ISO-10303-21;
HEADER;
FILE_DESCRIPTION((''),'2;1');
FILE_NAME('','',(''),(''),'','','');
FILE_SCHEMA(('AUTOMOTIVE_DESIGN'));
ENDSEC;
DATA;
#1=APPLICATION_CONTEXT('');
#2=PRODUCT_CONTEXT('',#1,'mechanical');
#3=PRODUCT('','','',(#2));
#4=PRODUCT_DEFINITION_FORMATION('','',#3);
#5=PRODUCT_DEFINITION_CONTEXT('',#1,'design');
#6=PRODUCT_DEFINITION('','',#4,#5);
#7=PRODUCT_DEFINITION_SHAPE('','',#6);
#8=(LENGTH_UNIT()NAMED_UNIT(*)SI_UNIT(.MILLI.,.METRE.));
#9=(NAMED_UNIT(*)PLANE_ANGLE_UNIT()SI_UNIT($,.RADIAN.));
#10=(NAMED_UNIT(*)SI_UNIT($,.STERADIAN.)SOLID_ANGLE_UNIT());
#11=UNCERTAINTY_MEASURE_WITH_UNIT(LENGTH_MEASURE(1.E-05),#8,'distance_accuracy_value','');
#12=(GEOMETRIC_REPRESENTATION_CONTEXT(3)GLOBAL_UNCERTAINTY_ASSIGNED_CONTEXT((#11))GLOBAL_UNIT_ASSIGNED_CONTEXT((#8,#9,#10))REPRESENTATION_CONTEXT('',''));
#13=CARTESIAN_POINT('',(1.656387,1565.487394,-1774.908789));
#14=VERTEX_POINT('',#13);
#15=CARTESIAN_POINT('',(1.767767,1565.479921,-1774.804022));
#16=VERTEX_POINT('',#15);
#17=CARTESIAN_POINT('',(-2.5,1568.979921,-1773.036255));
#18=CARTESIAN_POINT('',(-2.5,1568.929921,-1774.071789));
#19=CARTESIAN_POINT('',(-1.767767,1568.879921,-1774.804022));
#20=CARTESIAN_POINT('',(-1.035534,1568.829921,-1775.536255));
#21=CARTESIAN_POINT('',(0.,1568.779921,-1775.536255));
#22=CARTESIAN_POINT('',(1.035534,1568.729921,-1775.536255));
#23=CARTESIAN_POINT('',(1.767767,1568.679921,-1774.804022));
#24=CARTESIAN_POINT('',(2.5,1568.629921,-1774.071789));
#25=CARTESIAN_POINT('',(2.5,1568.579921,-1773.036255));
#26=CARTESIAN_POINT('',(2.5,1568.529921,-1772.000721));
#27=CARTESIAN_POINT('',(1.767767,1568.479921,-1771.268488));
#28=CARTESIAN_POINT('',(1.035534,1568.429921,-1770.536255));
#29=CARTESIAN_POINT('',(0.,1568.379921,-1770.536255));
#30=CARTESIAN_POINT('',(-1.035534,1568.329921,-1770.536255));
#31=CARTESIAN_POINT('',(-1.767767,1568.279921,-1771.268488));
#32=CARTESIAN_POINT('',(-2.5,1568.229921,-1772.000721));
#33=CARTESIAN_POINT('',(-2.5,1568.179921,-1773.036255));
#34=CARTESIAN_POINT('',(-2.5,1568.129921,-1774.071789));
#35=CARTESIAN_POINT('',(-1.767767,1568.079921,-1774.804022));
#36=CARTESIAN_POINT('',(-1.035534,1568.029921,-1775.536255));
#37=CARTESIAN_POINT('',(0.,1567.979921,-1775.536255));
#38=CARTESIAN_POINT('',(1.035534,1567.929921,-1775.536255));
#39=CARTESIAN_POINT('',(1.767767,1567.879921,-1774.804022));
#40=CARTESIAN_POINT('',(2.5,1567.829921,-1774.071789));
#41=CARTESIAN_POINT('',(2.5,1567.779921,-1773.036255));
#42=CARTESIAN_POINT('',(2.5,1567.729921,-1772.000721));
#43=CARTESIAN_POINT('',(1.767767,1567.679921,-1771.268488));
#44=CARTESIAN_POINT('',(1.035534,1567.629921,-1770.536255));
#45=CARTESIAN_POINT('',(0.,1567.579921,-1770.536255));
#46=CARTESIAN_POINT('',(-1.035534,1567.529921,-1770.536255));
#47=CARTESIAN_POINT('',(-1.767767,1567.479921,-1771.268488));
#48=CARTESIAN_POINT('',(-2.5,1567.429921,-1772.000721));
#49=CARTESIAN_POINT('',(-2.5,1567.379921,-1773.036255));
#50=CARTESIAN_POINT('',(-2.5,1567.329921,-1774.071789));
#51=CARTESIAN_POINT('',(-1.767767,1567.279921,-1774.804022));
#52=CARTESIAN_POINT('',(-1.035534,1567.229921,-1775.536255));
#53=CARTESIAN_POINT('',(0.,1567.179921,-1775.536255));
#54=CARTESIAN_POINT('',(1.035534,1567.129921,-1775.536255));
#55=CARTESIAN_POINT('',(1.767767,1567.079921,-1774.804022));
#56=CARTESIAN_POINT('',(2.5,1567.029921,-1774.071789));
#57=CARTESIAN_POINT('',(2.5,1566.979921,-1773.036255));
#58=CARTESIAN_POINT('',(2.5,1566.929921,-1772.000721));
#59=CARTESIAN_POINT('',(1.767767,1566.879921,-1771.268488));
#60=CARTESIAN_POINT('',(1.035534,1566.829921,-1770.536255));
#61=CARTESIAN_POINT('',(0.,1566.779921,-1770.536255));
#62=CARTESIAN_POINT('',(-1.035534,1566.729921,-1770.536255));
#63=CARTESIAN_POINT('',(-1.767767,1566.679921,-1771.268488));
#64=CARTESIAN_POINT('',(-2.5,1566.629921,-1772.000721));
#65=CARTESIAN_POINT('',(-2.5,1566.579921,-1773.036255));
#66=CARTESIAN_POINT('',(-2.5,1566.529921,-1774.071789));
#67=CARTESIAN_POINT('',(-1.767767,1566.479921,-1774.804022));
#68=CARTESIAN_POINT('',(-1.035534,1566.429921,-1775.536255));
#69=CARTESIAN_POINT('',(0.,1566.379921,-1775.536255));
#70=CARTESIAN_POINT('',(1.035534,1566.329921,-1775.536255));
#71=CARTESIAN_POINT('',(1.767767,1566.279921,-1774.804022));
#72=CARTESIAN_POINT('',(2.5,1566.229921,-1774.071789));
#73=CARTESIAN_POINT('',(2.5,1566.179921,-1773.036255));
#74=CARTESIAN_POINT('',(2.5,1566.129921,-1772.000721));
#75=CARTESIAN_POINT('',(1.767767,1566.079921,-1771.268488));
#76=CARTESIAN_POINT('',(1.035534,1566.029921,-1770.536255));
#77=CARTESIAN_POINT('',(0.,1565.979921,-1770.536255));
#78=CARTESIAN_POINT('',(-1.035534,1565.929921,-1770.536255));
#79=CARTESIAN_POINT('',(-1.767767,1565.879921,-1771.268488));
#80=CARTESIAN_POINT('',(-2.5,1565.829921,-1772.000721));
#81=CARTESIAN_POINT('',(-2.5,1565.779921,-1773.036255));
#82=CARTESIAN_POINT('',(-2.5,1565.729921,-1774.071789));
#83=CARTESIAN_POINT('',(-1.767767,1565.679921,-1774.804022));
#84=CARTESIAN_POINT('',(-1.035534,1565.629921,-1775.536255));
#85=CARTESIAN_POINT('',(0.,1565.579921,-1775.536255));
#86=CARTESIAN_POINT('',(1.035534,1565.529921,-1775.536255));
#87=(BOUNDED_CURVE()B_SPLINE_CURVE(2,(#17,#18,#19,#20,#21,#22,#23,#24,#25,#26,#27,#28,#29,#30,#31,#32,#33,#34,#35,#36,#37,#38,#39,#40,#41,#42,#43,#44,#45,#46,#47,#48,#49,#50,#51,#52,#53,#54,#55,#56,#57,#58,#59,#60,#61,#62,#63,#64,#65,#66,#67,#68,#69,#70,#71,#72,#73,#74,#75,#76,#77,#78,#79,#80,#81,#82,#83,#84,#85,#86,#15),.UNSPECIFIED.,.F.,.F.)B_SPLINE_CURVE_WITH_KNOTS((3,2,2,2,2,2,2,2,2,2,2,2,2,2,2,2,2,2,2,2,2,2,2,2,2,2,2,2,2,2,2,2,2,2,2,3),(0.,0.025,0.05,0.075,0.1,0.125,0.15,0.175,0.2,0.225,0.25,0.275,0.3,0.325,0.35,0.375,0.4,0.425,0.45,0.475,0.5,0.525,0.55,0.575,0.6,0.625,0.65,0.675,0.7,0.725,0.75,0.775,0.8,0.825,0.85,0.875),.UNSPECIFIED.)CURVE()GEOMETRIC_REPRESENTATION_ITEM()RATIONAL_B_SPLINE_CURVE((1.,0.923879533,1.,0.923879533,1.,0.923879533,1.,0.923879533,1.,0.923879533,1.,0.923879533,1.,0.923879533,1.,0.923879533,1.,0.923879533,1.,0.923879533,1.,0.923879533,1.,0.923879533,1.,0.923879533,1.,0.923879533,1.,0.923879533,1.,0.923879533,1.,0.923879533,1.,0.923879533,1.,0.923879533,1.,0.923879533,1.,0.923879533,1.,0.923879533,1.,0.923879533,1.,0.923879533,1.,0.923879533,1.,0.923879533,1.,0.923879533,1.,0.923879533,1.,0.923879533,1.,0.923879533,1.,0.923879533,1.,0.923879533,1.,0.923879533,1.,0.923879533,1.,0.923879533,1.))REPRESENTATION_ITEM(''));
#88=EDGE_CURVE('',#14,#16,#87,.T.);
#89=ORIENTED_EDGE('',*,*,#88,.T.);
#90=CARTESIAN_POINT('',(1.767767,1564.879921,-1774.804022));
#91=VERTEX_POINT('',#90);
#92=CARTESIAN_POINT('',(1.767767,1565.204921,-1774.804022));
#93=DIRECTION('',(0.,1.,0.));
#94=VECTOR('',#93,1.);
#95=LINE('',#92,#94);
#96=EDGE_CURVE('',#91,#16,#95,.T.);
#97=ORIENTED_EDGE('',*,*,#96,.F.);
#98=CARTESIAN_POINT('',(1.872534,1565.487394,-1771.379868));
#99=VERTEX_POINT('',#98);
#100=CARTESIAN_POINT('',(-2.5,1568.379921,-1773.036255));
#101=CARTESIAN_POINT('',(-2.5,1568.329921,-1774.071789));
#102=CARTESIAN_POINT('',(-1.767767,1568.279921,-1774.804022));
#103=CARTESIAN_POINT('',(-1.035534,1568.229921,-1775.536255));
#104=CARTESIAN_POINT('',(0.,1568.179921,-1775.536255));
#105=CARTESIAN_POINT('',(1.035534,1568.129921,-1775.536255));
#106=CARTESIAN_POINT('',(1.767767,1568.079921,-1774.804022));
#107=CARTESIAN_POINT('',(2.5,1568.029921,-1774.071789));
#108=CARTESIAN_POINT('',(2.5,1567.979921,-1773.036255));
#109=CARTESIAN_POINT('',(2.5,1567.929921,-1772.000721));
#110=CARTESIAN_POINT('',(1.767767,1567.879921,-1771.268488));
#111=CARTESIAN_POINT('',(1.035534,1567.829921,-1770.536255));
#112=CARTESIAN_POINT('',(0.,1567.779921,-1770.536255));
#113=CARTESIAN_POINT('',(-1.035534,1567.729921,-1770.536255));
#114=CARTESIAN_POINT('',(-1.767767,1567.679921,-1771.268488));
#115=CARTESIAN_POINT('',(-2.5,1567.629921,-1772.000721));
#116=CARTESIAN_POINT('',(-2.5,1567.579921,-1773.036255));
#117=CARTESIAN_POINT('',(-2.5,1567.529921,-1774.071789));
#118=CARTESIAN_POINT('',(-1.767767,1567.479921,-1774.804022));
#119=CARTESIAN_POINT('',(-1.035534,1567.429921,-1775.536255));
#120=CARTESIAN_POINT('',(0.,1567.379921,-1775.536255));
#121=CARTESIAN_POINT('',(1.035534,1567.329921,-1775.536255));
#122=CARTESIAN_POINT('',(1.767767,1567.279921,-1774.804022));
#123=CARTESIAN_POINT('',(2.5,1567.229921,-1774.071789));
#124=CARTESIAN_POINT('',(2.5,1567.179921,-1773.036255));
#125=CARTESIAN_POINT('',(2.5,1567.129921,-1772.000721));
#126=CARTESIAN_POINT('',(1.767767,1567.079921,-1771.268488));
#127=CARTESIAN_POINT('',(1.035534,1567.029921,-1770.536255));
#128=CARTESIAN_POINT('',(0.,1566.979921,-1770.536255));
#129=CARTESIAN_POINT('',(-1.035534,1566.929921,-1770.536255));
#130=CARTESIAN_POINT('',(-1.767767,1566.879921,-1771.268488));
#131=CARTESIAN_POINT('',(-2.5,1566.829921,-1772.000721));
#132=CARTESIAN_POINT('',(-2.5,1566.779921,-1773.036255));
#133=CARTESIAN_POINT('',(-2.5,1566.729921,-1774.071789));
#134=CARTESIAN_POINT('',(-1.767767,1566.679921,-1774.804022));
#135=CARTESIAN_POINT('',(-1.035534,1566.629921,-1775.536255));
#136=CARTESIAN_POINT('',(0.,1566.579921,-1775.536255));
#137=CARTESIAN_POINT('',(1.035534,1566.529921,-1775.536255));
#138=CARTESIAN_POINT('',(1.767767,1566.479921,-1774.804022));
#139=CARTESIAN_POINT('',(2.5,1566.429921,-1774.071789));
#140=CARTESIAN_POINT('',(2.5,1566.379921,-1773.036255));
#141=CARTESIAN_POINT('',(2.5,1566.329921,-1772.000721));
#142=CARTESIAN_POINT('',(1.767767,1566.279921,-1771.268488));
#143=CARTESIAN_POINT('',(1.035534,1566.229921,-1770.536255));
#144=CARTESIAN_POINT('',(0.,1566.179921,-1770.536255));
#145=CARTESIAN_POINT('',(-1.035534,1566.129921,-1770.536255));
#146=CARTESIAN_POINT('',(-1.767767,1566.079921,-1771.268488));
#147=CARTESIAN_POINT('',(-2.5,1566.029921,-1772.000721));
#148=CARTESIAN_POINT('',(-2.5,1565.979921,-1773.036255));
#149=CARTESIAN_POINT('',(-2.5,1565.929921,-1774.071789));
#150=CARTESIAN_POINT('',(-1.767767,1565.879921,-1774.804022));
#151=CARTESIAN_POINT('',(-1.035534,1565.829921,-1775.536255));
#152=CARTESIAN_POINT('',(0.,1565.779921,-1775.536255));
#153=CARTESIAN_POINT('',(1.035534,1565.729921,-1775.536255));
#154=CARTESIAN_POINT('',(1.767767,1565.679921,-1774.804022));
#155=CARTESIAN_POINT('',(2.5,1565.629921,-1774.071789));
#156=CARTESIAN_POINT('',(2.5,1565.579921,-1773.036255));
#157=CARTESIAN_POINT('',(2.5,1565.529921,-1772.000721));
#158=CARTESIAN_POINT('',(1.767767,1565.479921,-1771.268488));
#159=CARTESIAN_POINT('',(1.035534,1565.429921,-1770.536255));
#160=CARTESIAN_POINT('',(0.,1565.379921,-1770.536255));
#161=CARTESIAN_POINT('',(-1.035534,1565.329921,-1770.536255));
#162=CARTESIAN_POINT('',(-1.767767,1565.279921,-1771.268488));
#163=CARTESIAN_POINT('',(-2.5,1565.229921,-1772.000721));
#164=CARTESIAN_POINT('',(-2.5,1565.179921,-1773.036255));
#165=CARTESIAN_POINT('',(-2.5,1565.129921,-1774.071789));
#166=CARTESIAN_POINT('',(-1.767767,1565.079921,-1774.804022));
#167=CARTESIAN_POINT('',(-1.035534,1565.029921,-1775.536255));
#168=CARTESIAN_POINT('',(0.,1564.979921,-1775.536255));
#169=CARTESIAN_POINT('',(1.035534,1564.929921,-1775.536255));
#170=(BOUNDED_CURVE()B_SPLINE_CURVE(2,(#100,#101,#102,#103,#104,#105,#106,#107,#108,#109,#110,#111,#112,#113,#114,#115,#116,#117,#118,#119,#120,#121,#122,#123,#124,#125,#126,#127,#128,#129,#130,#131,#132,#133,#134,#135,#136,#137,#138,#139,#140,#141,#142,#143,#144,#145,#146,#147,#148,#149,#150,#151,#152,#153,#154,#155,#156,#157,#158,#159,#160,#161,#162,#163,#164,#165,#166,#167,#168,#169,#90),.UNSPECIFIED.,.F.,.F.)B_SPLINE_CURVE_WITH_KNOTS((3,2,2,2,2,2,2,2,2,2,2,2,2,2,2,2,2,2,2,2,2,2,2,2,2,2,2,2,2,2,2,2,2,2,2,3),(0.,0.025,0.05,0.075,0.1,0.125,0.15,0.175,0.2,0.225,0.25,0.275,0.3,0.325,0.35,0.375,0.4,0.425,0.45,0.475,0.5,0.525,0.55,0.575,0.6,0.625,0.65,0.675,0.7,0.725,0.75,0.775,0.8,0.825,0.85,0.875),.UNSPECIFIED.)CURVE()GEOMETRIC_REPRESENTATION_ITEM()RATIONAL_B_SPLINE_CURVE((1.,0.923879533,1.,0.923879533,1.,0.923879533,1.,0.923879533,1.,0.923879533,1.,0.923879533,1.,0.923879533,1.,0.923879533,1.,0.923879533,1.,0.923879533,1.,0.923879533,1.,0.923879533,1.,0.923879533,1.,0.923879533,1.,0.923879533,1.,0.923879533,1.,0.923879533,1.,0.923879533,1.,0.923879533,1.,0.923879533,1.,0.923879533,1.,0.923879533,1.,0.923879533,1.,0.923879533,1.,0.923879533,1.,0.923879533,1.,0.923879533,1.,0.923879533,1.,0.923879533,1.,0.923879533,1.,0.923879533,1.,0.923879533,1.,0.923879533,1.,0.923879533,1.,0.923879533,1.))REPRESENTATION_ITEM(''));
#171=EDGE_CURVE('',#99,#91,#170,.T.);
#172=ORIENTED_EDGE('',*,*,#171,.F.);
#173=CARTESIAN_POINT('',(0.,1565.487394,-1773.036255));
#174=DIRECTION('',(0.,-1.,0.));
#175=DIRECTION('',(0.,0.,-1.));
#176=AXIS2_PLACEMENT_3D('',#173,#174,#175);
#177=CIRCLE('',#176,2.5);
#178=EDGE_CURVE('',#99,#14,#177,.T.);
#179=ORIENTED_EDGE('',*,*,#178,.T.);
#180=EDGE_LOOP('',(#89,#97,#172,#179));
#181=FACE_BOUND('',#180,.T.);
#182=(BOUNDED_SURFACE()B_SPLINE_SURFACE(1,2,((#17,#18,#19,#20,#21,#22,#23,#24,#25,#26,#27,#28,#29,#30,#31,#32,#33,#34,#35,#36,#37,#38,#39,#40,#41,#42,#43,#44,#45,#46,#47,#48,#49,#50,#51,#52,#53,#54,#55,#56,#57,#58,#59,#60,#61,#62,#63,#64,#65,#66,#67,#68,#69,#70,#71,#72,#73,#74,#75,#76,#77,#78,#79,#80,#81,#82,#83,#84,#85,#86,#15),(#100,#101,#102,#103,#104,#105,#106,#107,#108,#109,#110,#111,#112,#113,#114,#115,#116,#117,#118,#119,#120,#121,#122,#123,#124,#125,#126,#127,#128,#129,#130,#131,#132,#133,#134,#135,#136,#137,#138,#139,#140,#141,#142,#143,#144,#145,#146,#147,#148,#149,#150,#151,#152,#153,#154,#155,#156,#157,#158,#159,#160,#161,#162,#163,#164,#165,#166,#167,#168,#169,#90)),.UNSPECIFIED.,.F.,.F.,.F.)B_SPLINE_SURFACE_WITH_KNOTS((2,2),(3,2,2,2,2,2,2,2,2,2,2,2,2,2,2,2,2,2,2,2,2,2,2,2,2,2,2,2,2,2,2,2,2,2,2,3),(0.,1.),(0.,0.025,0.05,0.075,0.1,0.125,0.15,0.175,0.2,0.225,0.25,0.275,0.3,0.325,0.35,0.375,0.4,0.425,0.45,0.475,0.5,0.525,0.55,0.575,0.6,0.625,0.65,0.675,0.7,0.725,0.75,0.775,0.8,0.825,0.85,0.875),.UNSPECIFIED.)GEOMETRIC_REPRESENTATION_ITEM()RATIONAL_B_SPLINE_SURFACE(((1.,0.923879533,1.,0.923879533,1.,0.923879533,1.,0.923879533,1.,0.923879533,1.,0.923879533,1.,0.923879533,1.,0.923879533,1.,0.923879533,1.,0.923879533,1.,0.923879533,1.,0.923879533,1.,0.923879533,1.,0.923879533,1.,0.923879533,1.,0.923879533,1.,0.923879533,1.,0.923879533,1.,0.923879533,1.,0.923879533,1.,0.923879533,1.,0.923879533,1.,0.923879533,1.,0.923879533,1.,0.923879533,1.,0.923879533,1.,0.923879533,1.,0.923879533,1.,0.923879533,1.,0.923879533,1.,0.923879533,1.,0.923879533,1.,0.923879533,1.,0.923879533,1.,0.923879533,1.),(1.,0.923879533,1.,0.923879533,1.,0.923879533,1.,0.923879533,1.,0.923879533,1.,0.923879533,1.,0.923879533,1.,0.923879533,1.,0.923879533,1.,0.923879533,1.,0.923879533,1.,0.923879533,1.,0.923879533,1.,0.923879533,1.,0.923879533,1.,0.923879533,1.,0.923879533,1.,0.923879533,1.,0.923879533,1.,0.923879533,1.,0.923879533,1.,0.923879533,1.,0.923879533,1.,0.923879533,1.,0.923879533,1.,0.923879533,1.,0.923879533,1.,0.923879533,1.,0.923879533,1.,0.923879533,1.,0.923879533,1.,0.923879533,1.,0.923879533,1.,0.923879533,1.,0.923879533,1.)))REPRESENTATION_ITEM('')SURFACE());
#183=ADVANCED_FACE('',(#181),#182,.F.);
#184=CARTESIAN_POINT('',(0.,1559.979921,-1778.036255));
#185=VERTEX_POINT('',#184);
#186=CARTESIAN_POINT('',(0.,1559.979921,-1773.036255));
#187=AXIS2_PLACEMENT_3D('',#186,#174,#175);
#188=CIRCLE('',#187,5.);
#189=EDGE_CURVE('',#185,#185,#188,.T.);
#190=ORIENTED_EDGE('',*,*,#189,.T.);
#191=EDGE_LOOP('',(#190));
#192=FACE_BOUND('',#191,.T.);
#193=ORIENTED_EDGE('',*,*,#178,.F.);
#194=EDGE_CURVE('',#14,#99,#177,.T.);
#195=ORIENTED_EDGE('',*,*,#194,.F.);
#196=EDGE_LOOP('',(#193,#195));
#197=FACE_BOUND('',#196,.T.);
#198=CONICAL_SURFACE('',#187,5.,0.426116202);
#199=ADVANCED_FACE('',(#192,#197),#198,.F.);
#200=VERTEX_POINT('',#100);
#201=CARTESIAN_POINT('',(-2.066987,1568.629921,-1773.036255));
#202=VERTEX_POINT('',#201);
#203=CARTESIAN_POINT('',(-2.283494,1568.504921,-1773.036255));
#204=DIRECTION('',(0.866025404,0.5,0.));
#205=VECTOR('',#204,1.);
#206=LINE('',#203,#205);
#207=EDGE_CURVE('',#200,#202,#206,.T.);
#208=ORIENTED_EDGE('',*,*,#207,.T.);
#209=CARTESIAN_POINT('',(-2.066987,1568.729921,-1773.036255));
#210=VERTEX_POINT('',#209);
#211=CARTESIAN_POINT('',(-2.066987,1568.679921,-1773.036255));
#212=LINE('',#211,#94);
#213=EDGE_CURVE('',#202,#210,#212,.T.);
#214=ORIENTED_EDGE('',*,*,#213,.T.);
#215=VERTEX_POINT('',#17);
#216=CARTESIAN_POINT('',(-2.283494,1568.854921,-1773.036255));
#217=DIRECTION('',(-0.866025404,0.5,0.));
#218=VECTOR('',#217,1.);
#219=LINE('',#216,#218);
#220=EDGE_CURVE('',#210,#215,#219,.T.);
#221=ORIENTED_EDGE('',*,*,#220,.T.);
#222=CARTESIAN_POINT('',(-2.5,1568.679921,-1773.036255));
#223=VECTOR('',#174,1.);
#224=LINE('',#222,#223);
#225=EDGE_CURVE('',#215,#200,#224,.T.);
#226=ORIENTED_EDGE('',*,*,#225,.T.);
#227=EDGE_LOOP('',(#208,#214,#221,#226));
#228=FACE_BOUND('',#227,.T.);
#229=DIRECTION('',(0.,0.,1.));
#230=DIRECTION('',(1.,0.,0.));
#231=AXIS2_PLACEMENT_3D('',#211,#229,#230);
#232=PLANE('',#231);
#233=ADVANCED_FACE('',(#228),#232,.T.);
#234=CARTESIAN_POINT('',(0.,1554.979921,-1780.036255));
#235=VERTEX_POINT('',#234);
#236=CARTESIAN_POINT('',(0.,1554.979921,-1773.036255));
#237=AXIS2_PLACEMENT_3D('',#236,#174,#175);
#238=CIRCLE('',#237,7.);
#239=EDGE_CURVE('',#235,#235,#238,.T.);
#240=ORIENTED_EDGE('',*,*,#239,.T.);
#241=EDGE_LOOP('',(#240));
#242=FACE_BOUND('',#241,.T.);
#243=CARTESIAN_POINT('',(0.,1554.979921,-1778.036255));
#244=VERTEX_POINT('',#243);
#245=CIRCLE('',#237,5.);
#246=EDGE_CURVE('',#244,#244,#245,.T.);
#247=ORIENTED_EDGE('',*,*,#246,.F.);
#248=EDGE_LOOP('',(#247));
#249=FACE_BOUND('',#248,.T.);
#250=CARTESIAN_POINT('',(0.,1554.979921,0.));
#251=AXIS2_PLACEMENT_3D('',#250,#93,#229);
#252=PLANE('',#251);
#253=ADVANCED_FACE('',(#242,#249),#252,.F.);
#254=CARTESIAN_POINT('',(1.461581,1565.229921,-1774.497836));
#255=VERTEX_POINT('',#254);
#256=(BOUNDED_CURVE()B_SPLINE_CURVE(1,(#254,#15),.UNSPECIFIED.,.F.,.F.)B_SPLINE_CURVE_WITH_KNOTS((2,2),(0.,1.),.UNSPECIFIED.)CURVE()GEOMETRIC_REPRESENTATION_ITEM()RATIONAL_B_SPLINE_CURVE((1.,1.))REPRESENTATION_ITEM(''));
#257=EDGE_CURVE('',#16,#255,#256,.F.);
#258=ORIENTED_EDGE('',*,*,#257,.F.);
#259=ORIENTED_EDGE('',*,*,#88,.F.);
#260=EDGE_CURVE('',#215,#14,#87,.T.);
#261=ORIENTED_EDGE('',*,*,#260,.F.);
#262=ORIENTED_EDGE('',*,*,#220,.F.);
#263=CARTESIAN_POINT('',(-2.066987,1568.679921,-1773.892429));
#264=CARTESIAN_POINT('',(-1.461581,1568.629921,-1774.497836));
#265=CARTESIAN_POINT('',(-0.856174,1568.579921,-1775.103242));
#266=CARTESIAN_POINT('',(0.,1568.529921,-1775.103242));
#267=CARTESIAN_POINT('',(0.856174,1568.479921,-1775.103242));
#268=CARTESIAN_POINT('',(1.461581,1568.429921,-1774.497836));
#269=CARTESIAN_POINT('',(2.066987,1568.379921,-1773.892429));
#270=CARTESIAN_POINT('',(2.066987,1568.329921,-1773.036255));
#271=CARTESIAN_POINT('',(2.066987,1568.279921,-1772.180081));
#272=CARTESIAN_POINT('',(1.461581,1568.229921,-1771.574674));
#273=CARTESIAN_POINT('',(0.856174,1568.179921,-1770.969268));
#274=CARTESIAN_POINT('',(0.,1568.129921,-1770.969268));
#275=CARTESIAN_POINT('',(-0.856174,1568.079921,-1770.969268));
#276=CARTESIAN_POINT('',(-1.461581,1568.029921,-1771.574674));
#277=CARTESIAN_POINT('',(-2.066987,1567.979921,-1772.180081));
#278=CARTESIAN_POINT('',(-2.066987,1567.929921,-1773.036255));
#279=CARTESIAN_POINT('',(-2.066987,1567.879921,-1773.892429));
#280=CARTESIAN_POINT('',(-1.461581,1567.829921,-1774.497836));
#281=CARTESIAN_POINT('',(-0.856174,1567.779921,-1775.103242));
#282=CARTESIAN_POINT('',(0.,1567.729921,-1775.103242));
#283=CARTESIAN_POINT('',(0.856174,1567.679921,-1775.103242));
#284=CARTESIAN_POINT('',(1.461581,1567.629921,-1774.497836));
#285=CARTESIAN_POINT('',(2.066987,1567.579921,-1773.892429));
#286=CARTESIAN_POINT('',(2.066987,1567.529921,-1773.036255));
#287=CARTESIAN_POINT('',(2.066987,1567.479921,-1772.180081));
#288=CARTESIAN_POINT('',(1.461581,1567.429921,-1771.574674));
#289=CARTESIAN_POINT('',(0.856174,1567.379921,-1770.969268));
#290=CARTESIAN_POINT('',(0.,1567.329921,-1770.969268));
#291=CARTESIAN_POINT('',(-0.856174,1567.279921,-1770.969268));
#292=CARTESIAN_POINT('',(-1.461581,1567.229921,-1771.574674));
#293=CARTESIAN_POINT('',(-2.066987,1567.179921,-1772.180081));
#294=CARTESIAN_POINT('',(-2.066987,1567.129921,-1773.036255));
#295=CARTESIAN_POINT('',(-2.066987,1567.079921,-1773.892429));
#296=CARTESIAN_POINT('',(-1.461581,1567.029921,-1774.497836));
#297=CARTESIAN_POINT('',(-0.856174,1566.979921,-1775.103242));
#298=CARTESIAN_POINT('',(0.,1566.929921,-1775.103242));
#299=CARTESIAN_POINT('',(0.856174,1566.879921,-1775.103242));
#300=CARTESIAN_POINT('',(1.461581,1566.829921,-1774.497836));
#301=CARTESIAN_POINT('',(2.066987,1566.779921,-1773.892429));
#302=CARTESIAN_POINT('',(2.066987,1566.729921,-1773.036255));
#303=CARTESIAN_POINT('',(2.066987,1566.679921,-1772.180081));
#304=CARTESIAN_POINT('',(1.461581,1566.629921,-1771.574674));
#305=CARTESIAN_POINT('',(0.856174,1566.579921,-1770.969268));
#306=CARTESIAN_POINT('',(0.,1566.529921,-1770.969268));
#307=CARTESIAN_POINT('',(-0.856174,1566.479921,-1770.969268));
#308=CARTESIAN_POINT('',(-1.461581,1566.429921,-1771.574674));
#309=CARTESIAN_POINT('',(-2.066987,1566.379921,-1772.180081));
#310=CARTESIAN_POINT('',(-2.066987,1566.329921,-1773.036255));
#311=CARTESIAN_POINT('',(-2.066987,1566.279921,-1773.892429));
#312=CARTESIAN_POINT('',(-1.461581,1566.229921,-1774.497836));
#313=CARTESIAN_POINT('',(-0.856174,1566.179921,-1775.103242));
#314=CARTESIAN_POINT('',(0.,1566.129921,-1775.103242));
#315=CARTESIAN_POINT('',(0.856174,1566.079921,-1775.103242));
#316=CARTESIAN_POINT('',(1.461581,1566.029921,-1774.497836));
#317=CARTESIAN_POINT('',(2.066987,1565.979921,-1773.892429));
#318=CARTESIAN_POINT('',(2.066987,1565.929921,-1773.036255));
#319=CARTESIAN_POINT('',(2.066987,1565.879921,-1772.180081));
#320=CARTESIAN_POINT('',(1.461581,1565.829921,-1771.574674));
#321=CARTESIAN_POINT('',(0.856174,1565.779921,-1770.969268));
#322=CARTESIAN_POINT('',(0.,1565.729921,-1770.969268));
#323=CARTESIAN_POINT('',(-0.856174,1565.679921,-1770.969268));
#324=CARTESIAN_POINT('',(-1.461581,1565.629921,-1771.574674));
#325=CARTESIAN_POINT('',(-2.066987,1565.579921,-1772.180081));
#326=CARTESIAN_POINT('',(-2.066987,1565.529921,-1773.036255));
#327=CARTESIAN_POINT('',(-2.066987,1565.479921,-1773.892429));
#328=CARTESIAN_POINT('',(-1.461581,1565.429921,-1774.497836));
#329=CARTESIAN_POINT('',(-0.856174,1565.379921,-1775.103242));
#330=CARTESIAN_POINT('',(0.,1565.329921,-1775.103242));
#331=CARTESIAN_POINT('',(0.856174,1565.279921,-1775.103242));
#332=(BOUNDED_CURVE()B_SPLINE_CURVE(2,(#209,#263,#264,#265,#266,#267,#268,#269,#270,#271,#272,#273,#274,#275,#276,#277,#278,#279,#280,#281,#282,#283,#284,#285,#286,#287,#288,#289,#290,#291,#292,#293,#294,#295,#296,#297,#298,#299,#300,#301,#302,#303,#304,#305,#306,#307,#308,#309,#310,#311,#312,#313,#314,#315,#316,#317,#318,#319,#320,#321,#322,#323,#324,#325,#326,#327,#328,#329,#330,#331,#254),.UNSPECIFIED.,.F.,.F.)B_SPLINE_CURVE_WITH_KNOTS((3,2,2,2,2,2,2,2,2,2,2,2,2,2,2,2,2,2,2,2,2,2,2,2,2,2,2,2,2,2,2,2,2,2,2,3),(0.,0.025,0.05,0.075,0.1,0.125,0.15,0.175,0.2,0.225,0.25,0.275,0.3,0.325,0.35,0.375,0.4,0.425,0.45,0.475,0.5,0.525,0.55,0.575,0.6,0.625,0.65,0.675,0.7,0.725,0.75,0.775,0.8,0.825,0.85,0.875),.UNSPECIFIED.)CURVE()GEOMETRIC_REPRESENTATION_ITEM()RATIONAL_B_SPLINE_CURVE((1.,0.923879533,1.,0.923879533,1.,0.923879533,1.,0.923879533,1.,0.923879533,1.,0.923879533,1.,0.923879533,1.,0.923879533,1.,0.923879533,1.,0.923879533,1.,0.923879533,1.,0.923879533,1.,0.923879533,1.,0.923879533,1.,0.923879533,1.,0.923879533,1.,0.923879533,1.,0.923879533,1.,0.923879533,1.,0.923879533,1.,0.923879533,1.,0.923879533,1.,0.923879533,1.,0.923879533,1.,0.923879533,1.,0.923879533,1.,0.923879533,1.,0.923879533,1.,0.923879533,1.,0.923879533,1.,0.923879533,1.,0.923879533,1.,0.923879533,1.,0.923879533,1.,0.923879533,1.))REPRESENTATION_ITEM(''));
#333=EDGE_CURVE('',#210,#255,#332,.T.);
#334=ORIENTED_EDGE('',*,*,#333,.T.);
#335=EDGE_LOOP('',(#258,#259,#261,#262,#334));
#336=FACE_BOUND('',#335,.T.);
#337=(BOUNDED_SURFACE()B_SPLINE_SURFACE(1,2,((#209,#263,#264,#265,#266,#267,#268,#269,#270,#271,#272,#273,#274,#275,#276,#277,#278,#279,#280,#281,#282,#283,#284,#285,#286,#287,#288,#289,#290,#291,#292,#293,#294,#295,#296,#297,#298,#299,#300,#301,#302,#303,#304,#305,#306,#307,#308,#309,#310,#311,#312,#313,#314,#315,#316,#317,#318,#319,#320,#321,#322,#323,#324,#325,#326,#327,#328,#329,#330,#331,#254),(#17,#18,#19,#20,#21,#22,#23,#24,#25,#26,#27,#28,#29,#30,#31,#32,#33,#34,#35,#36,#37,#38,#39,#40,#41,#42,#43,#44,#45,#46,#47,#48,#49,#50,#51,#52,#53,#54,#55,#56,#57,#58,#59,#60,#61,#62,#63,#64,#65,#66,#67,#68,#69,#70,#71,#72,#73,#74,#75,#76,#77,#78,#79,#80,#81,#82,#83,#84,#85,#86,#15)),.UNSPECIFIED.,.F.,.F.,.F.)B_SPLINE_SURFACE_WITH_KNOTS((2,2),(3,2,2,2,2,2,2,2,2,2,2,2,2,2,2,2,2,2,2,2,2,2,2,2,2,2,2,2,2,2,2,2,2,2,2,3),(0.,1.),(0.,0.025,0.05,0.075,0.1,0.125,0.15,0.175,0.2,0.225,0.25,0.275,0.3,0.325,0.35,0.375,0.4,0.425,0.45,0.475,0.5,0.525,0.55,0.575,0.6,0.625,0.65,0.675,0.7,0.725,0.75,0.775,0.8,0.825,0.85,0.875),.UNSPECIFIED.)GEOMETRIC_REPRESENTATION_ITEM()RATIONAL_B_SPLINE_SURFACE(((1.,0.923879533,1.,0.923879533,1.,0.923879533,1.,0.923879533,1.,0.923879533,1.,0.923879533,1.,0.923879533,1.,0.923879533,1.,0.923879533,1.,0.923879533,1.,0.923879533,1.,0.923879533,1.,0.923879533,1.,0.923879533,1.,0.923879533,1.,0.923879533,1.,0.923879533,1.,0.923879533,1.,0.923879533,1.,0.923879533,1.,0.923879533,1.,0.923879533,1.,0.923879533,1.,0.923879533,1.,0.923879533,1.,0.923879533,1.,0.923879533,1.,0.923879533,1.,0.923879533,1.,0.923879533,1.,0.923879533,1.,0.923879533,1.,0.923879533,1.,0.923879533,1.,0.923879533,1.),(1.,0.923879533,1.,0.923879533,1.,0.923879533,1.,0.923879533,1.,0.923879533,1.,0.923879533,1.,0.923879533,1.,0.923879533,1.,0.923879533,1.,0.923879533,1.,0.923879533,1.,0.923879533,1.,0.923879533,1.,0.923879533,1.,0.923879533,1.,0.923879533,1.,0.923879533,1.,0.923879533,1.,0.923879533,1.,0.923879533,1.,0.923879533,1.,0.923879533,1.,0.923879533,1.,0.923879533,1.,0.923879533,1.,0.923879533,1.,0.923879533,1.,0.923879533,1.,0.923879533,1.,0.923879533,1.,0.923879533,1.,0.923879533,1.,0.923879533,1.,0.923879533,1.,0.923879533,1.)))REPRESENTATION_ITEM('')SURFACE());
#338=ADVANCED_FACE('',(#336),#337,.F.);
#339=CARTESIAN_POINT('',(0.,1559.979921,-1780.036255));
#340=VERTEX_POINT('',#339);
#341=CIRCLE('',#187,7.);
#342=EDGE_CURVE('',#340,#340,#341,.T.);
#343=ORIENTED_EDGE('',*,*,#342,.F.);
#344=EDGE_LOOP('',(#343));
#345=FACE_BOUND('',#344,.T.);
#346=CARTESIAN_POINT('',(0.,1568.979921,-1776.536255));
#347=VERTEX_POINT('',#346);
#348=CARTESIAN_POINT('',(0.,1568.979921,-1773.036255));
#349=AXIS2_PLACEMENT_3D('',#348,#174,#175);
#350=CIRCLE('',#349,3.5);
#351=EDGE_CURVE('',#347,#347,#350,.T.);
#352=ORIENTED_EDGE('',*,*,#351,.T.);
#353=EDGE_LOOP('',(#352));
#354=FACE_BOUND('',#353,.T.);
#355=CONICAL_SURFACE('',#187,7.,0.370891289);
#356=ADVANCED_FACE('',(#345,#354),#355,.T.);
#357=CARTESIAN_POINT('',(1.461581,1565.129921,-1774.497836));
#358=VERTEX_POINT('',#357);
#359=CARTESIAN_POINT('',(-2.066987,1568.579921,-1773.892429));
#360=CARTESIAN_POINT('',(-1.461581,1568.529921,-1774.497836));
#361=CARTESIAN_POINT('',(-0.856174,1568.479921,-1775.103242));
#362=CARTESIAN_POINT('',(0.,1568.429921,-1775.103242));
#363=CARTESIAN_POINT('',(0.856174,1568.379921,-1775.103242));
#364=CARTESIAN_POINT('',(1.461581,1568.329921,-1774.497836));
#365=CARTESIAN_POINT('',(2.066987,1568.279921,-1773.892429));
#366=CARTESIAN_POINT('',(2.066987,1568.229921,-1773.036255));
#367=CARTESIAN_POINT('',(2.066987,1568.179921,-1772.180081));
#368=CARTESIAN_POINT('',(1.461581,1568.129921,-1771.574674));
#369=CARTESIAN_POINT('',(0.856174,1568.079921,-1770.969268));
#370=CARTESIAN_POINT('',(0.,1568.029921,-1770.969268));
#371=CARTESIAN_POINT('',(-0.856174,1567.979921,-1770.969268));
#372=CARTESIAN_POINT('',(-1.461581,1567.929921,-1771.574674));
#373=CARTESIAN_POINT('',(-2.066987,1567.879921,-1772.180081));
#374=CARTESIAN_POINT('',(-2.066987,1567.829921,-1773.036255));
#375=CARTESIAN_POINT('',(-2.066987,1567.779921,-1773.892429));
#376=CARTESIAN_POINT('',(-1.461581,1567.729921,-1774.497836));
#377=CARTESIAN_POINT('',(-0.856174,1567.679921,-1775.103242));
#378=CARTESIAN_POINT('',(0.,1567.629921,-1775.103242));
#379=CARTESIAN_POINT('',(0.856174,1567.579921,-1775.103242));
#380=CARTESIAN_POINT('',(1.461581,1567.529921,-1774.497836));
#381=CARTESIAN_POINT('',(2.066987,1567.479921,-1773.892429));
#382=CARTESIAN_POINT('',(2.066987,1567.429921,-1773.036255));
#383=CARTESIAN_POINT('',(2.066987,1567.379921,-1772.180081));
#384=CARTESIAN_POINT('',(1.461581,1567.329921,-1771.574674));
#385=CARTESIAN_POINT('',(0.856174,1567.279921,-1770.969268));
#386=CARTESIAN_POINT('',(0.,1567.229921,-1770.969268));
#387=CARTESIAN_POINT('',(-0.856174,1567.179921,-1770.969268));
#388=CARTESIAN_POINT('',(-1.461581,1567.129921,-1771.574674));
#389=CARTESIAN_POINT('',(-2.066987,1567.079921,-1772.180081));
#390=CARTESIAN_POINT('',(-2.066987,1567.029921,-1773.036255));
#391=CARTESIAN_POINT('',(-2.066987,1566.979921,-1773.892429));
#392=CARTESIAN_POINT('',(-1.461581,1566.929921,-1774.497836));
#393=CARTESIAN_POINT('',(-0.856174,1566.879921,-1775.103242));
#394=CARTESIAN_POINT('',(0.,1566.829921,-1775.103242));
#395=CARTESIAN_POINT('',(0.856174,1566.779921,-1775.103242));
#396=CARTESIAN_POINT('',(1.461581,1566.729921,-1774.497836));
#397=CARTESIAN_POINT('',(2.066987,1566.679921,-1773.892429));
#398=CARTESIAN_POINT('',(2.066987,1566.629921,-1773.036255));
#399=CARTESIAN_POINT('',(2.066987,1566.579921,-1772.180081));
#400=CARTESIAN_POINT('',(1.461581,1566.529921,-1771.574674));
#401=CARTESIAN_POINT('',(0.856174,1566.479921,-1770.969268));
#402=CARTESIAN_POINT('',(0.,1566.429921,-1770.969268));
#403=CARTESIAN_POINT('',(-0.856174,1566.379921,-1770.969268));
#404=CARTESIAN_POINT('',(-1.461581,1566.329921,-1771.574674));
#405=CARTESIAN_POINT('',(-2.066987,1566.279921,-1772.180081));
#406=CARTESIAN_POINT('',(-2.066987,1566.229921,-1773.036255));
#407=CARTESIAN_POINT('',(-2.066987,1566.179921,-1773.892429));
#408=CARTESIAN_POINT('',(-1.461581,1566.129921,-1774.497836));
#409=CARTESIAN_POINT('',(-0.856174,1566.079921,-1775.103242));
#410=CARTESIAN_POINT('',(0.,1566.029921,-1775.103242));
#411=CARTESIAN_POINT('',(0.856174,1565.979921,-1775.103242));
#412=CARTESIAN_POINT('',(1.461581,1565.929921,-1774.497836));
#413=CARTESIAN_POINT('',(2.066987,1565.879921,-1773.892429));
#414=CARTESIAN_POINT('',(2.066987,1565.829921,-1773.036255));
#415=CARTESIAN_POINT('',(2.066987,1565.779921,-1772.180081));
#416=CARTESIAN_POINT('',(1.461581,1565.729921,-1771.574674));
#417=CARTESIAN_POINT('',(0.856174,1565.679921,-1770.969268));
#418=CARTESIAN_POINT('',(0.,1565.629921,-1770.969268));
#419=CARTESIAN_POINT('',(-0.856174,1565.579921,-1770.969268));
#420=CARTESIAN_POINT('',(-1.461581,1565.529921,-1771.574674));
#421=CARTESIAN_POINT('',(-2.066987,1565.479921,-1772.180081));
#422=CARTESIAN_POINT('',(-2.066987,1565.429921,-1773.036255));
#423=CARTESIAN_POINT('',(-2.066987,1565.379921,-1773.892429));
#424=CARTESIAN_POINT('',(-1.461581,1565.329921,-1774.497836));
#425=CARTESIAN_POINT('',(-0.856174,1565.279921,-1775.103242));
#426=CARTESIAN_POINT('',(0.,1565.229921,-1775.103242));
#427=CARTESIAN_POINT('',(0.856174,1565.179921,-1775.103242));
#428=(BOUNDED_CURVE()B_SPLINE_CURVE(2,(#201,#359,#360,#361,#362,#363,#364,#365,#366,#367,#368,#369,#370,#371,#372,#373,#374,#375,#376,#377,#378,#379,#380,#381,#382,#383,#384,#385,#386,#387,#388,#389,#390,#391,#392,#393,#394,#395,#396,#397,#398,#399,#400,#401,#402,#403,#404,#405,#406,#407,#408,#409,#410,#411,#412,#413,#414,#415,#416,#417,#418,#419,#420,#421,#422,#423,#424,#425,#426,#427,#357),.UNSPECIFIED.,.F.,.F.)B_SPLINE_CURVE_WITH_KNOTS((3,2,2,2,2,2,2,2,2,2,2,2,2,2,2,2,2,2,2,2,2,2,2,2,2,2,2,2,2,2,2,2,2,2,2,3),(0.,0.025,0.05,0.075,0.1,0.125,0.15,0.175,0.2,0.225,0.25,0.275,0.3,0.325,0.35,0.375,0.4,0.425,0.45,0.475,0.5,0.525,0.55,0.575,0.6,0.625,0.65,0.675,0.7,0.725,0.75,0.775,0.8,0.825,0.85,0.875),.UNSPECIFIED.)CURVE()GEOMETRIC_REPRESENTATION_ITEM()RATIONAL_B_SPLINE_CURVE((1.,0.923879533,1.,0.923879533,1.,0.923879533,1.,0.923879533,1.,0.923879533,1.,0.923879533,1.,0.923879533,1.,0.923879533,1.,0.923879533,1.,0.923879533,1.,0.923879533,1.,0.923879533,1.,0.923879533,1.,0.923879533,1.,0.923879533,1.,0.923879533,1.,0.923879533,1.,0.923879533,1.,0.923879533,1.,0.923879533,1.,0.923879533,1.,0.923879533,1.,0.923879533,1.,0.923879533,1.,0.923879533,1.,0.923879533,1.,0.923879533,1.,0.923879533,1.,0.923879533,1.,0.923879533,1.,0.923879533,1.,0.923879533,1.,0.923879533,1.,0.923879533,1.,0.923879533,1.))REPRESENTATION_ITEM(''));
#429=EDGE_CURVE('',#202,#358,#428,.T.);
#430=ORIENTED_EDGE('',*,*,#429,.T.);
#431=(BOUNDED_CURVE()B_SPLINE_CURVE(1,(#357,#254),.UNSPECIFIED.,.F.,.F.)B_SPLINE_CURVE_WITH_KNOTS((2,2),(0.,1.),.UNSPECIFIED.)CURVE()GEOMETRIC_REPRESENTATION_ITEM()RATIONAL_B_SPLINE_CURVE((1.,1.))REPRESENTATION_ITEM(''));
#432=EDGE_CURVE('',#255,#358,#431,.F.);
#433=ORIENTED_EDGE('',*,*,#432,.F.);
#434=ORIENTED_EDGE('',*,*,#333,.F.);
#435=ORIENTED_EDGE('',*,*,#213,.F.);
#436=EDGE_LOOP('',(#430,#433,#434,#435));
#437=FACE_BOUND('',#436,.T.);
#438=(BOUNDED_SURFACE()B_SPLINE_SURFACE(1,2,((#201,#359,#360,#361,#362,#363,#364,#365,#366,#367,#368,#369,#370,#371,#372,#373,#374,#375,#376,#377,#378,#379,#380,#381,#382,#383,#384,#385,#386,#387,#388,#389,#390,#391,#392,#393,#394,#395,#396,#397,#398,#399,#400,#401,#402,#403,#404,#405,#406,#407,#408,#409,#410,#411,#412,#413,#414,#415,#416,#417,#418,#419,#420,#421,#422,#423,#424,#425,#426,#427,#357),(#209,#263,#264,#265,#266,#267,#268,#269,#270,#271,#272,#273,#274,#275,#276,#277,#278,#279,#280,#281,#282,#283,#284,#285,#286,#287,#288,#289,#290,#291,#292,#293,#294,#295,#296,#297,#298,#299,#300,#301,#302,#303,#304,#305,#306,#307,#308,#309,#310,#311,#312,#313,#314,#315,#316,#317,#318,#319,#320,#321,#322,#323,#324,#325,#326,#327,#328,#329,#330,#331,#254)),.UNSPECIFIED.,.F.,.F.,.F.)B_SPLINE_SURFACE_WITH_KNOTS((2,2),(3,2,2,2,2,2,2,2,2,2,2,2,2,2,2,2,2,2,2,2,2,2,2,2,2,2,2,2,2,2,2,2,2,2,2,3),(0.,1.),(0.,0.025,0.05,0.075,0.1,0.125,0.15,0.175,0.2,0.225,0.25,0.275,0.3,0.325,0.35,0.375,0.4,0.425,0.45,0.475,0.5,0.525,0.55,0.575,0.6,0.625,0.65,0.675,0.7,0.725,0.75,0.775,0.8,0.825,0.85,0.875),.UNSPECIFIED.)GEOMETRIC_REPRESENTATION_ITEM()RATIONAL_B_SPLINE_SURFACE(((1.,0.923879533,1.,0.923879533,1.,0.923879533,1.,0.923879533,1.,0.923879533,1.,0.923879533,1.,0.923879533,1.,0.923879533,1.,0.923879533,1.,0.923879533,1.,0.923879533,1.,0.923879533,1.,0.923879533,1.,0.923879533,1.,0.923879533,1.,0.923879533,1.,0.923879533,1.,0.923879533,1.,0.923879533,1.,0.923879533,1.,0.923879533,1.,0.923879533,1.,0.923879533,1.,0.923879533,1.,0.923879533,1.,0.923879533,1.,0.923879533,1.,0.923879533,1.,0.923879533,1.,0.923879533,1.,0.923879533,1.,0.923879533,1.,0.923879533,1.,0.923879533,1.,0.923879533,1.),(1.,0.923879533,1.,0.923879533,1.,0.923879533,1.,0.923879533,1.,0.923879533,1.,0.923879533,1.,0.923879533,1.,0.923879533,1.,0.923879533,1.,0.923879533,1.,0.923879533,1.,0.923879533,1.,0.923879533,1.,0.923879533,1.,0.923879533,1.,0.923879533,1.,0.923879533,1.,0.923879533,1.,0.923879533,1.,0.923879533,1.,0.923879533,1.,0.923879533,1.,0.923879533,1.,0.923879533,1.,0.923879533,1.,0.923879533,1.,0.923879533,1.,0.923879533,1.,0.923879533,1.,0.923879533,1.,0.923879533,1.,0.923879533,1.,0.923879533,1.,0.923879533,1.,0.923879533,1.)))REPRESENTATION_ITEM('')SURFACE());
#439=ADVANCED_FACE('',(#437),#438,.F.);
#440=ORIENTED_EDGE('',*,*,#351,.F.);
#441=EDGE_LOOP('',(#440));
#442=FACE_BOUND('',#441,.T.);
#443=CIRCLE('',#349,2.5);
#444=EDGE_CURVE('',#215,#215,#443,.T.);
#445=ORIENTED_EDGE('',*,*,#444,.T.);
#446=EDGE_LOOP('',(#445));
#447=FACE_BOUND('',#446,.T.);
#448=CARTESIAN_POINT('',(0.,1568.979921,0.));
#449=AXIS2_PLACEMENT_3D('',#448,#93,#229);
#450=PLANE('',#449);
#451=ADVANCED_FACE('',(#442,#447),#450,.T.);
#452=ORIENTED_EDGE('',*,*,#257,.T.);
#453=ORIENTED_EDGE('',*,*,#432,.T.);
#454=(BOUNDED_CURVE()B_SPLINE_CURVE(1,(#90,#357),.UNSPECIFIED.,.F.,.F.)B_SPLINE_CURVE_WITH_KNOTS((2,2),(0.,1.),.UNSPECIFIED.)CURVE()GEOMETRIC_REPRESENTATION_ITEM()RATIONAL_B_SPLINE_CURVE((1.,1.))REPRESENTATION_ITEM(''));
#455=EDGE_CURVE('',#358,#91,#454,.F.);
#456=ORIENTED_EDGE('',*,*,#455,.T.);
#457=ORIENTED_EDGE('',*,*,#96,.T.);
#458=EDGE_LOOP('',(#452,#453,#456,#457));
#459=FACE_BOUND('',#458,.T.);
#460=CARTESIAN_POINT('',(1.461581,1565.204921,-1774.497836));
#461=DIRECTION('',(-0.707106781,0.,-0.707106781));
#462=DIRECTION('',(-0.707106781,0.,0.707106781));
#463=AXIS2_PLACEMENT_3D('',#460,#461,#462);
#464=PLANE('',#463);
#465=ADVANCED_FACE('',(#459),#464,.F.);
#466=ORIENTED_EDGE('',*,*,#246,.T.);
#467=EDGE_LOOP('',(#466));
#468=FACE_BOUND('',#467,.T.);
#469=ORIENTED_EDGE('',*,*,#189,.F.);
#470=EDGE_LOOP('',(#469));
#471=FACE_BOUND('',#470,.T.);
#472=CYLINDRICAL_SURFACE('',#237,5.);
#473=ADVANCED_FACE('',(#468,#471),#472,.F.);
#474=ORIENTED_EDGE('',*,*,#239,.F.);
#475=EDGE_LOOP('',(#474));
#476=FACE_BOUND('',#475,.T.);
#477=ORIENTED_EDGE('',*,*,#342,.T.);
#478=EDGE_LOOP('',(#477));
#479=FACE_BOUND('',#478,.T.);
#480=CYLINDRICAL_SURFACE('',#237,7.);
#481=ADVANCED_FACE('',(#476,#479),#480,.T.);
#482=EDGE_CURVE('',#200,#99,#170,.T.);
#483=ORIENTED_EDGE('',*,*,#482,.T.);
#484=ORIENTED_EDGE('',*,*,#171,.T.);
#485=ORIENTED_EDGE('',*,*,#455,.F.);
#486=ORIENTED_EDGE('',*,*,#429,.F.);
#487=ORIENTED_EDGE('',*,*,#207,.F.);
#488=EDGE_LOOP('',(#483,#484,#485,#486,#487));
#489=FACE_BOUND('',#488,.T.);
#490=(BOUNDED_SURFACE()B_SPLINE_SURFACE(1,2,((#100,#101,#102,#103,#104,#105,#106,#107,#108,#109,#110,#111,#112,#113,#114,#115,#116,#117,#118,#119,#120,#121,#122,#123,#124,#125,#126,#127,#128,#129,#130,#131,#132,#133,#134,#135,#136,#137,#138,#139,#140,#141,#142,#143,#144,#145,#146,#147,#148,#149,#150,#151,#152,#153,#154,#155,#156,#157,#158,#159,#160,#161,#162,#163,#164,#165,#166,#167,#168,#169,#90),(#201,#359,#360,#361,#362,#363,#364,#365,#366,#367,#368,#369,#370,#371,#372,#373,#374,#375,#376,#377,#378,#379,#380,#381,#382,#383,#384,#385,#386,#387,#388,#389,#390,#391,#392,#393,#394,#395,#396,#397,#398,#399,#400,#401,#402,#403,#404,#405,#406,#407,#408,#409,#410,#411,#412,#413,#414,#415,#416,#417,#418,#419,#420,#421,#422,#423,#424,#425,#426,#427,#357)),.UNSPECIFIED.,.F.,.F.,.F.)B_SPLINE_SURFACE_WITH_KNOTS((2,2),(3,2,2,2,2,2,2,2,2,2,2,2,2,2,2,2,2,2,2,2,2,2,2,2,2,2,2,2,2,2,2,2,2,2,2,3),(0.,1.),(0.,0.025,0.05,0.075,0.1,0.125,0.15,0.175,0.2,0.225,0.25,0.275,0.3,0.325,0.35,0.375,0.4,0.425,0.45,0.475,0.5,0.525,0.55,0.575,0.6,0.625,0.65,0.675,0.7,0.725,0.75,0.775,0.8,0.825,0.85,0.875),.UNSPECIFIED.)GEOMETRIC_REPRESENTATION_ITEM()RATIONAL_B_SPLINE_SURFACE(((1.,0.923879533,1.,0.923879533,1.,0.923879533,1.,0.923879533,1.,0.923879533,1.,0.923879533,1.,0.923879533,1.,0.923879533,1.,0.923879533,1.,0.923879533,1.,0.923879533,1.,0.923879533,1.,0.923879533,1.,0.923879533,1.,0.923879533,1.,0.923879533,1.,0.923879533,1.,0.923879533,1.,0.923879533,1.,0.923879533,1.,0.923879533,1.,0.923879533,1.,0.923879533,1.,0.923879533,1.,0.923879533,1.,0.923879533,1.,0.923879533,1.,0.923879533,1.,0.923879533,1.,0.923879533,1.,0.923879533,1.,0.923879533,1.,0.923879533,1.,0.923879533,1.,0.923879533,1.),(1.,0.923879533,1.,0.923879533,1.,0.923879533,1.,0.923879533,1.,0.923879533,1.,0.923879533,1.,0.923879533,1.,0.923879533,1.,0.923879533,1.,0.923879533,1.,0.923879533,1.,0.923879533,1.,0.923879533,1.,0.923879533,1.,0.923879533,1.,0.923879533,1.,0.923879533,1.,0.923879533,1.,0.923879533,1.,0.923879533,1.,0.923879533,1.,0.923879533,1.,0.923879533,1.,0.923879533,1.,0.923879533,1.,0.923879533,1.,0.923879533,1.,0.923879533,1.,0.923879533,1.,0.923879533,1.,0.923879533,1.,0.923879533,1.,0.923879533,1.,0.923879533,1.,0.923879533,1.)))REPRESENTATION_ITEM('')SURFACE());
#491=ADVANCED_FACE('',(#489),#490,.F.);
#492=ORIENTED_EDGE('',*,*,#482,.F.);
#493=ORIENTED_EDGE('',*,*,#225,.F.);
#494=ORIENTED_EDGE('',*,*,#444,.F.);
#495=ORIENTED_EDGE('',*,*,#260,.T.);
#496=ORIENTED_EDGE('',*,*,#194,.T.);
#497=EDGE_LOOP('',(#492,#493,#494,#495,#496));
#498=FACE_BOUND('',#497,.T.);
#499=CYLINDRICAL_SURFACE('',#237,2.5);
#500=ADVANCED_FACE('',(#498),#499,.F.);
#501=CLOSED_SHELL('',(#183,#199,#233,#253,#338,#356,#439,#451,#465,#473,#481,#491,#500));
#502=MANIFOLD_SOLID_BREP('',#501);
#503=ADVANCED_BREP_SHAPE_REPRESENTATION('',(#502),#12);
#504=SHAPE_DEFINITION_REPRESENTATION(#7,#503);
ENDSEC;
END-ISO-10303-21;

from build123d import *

# Parameters (mm, degrees)
THREAD1_PITCH = 0.8


with BuildPart() as part:
    # Sketch1 → Revolve1 (revolve)
    with BuildSketch(Plane(origin=(0, 0, 0), x_dir=(0, 0, -1), z_dir=(1, 0, 0))):
        Polygon((1778.036254975, 1559.979920793), (1775.536254975, 1565.487394057), (1775.536254975, 1568.979920793), (1776.536254975, 1568.979920793), (1780.036254975, 1559.979920793), (1780.036254975, 1554.979920793), (1778.036254975, 1554.979920793), align=None)
    revolve(axis=Axis((0, 1554.979920793, -1773.036254975), (0, 1, 0)))

    # Thread1: the profile of Thread Profile1 profile screwed along a right-hand helix of 4.375 turns, 8 arcs to a turn; built about Z, then put on its axis
    thread1_z = Axis((0, 0, 0), (0, 0, 1))
    thread1_corners = [(2.5003, 0, 0.600173208), (2.066987296, 0, 0.350000001), (2.066987296, 0, 0.250000001), (2.5003, 0, -0.000173205)]
    with BuildLine(mode=Mode.PRIVATE) as thread1_profile:
        Line(thread1_corners[0], thread1_corners[1])
        Line(thread1_corners[1], thread1_corners[2])
        Line(thread1_corners[2], thread1_corners[3])
        Line(thread1_corners[3], thread1_corners[0])
    thread1_cap = Face(thread1_profile.wire())
    thread1_turn_angles = [0, 22.5, 45, 67.5, 90, 112.5, 135, 157.5, 180, 202.5, 225, 247.5, 270, 292.5, 315, 337.5, 360]
    thread1_turn_weights = [1, 0.9238795325112867, 1, 0.9238795325112867, 1, 0.9238795325112867, 1, 0.9238795325112867, 1, 0.9238795325112867, 1, 0.9238795325112867, 1, 0.9238795325112867, 1, 0.9238795325112867, 1]
    thread1_turn_rails = [Edge.make_bspline([Vector(p[0], p[1], 0).rotate(thread1_z, thread1_turn_angles[k]) / thread1_turn_weights[k] + Vector(0, 0, p[2] + THREAD1_PITCH * thread1_turn_angles[k] / 360) for k in range(17)], [0, 0, 0, 1, 1, 2, 2, 3, 3, 4, 4, 5, 5, 6, 6, 7, 7, 8, 8, 8], 2, thread1_turn_weights) for p in thread1_corners]
    thread1_turn_sides = [Face.make_surface_from_curves(thread1_turn_rails[p[0]], thread1_turn_rails[p[1]]) for p in [(0, 1), (1, 2), (2, 3), (3, 0)]]
    thread1_last_angles = [1440, 1462.5, 1485, 1507.5, 1530, 1552.5, 1575]
    thread1_last_weights = [1, 0.9238795325112867, 1, 0.9238795325112867, 1, 0.9238795325112867, 1]
    thread1_last_rails = [Edge.make_bspline([Vector(p[0], p[1], 0).rotate(thread1_z, thread1_last_angles[k]) / thread1_last_weights[k] + Vector(0, 0, p[2] + THREAD1_PITCH * thread1_last_angles[k] / 360) for k in range(7)], [0, 0, 0, 1, 1, 2, 2, 3, 3, 3], 2, thread1_last_weights) for p in thread1_corners]
    thread1_last_sides = [Face.make_surface_from_curves(thread1_last_rails[p[0]], thread1_last_rails[p[1]]) for p in [(0, 1), (1, 2), (2, 3), (3, 0)]]
    thread1 = Plane(origin=(0, 1568.979920793, -1773.036254975), x_dir=(-1, 0, 0), z_dir=(0, -1, 0)) * Solid(Shell([*[p.moved(Location((0, 0, THREAD1_PITCH * i))) for i in range(4) for p in thread1_turn_sides], *thread1_last_sides, thread1_cap, thread1_cap.rotate(thread1_z, 1575).moved(Location((0, 0, THREAD1_PITCH * 1575 / 360)))]))
    add(thread1)


solid = part.part
